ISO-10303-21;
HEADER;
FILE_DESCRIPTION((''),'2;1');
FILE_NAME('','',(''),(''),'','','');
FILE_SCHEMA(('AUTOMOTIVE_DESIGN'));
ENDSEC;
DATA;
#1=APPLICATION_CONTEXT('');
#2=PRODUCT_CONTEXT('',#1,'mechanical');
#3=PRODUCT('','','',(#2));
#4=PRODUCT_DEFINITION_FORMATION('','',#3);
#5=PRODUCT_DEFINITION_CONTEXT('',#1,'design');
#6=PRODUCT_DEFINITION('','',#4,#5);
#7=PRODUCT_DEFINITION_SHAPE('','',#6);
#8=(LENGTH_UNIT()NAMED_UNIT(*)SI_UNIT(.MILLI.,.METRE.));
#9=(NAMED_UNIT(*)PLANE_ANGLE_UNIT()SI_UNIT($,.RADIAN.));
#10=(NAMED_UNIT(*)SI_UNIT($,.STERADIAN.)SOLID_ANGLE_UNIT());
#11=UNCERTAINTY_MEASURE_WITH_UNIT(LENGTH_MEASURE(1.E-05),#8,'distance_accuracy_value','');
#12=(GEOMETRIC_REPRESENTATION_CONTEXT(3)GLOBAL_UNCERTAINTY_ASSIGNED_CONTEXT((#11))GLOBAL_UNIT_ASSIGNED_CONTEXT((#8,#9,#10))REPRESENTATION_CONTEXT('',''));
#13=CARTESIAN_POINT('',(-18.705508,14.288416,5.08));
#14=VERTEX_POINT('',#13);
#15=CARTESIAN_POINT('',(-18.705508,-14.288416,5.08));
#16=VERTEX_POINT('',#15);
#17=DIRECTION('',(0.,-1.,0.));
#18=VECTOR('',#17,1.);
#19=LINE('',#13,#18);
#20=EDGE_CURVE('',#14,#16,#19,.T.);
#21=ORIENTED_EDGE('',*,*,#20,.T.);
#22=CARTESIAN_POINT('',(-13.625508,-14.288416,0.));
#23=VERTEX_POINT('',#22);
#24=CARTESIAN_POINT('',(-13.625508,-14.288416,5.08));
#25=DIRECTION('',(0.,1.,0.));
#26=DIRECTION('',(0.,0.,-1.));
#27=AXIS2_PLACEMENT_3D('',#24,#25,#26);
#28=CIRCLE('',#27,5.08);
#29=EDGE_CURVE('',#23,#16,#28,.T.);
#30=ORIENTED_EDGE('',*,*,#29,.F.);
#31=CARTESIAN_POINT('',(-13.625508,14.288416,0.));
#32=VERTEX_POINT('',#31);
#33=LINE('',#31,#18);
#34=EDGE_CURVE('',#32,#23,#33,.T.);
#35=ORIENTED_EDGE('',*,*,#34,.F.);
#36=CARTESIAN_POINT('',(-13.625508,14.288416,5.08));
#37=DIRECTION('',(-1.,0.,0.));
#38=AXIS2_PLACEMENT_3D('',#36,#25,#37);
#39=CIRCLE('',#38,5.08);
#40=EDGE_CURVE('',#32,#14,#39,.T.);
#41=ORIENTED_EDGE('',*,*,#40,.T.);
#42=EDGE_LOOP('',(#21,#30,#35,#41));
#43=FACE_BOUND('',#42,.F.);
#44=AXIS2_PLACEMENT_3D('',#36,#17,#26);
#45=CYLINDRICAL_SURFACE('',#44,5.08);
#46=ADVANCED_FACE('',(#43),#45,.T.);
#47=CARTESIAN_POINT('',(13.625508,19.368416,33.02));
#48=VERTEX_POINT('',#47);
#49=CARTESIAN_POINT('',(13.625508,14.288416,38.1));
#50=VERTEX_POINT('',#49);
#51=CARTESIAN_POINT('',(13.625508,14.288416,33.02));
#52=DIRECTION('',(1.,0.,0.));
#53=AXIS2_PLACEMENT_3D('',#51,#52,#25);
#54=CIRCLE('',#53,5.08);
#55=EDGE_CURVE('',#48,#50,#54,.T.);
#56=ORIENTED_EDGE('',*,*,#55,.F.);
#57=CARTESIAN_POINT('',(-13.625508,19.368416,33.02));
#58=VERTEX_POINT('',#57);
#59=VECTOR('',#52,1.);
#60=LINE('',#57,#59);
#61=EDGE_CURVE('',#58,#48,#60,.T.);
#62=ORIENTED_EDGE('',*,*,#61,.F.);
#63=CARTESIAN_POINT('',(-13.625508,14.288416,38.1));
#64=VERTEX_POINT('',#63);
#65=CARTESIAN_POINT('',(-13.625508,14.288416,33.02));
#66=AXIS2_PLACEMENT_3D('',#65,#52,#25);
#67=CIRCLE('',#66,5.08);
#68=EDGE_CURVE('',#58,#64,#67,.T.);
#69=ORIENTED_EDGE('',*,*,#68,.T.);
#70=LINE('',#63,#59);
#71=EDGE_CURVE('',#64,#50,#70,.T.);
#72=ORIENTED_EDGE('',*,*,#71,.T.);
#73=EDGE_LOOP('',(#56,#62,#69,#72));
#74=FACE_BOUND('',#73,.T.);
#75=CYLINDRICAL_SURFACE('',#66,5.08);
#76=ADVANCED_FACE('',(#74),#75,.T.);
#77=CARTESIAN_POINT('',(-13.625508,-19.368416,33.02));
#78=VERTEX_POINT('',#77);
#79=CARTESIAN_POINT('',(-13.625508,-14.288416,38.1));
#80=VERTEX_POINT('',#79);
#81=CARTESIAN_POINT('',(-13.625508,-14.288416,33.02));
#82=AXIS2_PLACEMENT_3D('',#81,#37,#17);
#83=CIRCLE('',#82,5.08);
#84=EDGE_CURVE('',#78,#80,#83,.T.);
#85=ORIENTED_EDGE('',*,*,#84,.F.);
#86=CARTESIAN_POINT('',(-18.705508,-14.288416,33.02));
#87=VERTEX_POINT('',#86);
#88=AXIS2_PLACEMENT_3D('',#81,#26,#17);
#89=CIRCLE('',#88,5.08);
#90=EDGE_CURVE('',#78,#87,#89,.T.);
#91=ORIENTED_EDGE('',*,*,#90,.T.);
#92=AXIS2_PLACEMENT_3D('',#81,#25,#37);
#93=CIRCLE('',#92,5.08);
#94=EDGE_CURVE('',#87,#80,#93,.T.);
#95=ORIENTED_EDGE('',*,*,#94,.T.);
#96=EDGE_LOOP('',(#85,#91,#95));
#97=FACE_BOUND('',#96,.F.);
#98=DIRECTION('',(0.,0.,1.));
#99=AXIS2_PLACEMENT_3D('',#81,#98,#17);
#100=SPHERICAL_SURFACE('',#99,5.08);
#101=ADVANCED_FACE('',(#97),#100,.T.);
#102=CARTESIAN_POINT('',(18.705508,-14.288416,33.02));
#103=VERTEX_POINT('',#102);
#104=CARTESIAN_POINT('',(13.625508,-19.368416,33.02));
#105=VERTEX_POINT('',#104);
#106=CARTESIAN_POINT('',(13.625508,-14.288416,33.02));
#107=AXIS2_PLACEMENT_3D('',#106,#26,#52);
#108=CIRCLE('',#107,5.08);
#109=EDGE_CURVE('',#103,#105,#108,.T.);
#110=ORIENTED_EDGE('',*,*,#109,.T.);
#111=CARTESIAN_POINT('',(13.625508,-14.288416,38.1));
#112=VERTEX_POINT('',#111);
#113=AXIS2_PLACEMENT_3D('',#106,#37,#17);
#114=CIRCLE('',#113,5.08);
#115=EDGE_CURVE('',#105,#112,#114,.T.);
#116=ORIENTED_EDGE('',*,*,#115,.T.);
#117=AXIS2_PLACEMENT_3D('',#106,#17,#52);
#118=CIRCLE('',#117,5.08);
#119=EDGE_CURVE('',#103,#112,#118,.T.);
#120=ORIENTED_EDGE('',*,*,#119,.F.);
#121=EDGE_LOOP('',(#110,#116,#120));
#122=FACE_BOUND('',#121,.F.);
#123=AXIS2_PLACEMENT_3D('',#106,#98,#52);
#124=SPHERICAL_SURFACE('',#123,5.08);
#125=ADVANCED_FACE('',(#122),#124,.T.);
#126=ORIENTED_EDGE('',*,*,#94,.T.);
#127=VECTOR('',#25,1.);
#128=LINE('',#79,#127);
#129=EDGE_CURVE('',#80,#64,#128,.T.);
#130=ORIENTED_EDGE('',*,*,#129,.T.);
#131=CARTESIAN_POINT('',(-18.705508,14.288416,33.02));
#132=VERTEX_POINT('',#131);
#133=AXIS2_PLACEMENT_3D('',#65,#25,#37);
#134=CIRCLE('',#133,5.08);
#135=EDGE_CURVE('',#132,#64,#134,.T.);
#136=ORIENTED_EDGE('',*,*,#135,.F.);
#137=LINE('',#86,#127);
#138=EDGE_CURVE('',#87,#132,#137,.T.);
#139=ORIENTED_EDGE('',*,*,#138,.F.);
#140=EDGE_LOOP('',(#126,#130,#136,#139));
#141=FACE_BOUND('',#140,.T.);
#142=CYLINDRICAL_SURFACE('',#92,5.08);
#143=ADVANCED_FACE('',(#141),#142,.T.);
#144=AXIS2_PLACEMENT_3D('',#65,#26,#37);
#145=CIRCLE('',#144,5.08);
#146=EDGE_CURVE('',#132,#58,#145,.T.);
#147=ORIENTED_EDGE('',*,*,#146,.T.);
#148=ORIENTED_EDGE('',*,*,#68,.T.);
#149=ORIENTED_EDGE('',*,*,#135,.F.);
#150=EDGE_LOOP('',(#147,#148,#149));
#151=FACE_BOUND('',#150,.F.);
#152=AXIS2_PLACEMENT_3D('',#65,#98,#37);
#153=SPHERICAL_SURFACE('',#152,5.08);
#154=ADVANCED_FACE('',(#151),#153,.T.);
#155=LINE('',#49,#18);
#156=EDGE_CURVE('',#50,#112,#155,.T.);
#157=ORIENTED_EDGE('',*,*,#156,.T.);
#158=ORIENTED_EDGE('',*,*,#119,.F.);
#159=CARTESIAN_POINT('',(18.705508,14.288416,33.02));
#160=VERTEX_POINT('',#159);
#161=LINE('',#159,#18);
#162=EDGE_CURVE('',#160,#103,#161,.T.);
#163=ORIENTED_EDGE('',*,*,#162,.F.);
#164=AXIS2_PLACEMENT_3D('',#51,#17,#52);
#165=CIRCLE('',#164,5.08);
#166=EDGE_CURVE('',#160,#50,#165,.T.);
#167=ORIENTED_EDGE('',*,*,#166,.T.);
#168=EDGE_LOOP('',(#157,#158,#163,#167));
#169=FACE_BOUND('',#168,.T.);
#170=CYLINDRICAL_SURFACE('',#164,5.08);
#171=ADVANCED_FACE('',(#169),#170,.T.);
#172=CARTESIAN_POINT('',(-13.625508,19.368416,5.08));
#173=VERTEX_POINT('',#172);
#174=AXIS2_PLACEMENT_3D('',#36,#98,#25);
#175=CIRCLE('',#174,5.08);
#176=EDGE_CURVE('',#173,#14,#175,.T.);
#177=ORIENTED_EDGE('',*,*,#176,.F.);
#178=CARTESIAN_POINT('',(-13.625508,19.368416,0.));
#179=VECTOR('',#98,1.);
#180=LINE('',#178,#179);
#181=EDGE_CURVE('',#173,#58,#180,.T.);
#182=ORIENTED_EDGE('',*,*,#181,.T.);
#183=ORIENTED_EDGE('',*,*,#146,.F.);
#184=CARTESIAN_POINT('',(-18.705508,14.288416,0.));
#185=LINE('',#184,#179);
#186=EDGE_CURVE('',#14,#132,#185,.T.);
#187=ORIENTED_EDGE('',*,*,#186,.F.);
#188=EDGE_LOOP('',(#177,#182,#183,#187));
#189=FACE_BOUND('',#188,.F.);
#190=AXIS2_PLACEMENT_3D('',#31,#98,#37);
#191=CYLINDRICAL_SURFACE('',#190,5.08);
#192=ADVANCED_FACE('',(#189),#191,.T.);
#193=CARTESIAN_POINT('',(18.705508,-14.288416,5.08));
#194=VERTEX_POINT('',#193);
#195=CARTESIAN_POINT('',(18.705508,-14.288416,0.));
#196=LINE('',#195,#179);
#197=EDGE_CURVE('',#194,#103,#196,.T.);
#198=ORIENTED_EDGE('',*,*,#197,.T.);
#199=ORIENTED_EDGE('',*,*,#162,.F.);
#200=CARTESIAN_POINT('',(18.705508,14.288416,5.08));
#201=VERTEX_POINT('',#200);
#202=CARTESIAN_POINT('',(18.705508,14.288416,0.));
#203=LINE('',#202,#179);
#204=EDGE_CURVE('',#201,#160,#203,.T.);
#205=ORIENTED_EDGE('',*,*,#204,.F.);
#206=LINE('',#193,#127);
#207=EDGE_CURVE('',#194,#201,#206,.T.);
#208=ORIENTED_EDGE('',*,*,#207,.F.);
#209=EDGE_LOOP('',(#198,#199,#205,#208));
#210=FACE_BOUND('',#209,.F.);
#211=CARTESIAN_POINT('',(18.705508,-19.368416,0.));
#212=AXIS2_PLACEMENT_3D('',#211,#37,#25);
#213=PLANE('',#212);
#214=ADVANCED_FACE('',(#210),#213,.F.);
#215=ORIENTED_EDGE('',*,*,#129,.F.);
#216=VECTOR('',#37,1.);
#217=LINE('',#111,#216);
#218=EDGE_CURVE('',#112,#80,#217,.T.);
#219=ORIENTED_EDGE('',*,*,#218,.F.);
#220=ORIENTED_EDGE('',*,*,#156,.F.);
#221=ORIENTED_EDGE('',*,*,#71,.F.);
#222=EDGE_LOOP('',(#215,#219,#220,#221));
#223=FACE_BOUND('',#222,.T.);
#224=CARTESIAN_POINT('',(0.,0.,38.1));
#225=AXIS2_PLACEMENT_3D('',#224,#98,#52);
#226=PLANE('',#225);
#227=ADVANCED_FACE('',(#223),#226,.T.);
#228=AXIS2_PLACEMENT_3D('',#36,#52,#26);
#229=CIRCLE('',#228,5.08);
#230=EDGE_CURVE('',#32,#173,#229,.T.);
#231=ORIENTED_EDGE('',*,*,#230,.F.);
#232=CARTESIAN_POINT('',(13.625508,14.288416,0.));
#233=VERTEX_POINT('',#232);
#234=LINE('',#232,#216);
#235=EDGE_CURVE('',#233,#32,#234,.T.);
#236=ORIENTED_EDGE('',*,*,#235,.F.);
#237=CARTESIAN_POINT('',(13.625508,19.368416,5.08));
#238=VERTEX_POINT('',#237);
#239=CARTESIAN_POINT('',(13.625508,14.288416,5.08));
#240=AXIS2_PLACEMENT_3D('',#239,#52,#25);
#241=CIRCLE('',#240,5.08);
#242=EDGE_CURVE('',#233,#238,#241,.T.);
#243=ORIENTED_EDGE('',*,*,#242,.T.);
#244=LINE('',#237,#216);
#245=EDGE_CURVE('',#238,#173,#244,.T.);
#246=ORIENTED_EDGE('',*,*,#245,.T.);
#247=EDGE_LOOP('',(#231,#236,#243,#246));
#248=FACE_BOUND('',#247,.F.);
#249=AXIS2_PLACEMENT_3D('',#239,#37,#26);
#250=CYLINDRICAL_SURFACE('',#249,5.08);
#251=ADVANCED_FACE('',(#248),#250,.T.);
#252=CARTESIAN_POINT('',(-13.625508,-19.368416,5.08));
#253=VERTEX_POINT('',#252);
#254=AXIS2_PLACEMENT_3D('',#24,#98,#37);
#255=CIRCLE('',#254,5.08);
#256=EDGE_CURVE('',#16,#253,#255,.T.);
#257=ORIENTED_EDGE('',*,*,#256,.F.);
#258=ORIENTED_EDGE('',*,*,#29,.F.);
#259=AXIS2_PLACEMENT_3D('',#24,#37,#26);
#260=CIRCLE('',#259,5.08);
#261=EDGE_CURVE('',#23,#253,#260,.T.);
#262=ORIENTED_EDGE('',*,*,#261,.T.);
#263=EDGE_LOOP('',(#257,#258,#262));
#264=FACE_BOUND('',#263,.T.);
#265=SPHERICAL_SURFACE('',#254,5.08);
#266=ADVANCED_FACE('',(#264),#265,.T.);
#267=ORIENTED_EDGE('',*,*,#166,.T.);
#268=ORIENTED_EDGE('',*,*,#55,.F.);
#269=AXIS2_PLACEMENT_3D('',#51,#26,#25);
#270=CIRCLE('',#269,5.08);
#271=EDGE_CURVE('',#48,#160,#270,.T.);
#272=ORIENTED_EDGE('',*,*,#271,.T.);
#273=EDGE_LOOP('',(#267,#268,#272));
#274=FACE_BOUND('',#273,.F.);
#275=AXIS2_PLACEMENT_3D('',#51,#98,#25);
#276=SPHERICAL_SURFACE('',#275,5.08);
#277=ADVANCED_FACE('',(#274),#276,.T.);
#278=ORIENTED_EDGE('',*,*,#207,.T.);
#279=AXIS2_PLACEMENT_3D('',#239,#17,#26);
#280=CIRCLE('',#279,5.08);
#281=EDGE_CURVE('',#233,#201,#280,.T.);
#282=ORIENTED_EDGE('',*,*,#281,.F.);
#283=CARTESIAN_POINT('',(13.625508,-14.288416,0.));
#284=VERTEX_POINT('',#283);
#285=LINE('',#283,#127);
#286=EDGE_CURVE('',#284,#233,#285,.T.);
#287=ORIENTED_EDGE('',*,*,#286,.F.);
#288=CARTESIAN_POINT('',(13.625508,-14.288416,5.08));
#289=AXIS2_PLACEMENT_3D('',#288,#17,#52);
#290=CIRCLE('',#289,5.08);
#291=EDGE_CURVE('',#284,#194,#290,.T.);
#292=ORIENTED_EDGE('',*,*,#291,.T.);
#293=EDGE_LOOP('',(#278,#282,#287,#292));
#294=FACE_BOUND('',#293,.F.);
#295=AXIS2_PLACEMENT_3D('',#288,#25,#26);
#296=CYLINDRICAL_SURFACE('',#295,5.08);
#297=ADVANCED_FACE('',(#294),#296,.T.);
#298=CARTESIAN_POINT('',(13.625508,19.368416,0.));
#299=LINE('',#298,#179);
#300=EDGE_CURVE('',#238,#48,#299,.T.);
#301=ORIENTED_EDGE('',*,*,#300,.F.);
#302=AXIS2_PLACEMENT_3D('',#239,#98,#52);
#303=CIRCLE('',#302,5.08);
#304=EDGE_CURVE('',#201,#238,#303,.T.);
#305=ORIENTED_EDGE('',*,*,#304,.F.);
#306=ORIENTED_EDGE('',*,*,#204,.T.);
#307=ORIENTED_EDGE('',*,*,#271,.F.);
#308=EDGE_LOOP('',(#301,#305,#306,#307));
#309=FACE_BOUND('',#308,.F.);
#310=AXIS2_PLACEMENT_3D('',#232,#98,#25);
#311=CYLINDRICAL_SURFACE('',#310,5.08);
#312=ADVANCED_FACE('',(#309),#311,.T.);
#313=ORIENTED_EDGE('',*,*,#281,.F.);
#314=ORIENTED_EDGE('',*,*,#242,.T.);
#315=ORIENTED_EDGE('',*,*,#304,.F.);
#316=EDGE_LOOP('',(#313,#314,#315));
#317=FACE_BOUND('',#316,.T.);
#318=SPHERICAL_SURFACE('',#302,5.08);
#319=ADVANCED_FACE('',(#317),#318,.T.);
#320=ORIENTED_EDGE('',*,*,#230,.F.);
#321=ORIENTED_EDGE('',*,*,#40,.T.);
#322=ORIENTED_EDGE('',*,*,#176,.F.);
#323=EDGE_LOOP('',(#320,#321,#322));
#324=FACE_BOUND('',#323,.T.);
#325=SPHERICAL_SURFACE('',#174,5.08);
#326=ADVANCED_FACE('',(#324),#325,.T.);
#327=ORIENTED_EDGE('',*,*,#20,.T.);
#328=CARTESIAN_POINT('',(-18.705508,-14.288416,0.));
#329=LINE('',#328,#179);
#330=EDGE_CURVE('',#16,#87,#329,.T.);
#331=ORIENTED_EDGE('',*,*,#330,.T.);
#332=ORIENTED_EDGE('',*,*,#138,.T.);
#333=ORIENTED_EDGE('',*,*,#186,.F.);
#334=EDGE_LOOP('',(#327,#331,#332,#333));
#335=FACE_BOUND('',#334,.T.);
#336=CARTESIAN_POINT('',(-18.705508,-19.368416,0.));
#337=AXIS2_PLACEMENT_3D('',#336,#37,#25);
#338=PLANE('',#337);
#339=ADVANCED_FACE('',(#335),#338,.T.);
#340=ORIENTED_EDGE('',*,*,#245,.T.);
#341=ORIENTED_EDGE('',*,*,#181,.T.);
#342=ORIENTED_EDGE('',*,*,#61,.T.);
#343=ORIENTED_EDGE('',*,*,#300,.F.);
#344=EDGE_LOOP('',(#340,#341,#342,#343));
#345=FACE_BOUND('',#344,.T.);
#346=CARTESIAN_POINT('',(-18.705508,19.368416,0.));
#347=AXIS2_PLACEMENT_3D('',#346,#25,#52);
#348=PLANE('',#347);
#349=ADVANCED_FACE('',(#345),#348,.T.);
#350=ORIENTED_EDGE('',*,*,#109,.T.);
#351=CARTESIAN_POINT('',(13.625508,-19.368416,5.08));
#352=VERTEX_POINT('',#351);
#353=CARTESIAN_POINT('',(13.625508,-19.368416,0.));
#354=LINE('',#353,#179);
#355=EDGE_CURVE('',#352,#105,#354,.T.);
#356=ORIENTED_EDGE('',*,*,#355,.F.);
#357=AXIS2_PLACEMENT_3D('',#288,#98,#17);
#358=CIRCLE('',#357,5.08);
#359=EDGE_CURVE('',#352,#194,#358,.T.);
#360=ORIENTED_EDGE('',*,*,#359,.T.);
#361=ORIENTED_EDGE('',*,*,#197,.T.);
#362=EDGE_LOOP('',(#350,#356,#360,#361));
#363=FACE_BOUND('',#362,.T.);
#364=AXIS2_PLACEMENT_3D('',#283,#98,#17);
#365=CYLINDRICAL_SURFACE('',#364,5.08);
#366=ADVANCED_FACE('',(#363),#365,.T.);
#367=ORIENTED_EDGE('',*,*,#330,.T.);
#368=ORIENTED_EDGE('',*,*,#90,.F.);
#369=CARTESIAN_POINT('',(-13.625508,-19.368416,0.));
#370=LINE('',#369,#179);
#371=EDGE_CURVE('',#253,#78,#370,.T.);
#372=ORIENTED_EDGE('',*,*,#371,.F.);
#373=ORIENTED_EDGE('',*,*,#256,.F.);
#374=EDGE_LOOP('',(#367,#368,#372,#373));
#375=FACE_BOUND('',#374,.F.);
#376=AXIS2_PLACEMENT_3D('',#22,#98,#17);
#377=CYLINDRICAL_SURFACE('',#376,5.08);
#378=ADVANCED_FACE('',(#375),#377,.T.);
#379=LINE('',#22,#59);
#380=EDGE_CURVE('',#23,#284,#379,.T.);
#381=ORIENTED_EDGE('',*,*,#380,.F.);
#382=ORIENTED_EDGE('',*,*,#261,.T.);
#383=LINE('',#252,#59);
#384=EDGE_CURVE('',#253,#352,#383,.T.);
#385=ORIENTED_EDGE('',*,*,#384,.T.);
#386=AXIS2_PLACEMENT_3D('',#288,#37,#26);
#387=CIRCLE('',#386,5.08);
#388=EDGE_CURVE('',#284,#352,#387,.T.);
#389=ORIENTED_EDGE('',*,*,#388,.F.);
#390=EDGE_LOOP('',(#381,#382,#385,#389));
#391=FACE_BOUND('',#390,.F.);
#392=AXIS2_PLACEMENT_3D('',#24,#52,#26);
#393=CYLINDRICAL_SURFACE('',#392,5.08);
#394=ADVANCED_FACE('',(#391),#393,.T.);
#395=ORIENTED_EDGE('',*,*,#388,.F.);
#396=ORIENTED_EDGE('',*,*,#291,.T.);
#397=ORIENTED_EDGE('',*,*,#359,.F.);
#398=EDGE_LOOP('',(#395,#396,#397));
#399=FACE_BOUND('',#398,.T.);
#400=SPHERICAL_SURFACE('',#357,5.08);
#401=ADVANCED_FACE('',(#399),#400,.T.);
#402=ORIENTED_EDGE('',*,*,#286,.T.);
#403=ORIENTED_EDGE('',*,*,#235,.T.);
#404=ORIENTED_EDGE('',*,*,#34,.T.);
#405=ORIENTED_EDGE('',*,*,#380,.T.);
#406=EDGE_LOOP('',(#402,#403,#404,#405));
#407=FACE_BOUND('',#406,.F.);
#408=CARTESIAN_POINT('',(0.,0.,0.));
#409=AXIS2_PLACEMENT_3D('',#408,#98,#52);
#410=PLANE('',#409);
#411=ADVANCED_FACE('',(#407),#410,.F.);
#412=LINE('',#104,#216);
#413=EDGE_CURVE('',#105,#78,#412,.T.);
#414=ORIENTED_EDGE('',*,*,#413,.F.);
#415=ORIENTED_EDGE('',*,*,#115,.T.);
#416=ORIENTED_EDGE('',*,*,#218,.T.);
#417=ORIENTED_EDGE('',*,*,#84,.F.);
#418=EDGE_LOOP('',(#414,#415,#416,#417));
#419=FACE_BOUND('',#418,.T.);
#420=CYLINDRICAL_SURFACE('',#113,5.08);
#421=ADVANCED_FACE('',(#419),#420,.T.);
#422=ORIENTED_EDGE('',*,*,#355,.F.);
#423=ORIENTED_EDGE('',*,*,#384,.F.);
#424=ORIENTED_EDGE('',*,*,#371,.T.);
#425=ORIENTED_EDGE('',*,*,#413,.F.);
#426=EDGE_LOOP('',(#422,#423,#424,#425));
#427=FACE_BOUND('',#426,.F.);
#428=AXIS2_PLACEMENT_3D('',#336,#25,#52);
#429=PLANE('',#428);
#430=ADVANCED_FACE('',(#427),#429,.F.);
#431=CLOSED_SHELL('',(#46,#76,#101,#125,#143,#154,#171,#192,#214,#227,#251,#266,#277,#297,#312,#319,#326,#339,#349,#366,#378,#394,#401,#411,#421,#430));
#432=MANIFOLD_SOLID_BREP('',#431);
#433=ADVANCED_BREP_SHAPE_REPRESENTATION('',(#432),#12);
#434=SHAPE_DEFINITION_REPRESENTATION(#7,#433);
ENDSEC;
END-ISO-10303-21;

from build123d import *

# Parameters (mm, degrees)
F0_W     = 37.4110154808
F0_H     = 38.7368313968
F1_DEPTH = 38.1
F2_R     = 5.08
F3_R     = 5.08
F4_R     = 5.08
F5_R     = 5.08
F6_R     = 5.08
F7_R     = 5.08


# Not quite as in the source:
# - the program builds the solid bodies; features that only make, move or delete a surface that nothing else refers to are left out


with BuildPart() as f1:
    # F0 (on Top) → F1 (new body)
    with BuildSketch(Plane.XY):
        Rectangle(F0_W, F0_H)
    extrude(amount=F1_DEPTH)

    # F2
    f2_edges = [f1.edges().sort_by_distance(p)[0] for p in [
        (18.705508, -19.368416, 19.05),
    ]]
    fillet(f2_edges, radius=F2_R)

    # F3
    f3_edges = [f1.edges().sort_by_distance(p)[0] for p in [
        (-18.705508, -19.368416, 19.05),
    ]]
    fillet(f3_edges, radius=F3_R)

    # F4
    f4_edges = [f1.edges().sort_by_distance(p)[0] for p in [
        (-18.705508, 19.368416, 19.05),
    ]]
    fillet(f4_edges, radius=F4_R)

    # F5
    f5_edges = [f1.edges().sort_by_distance(p)[0] for p in [
        (18.705508, 19.368416, 19.05),
    ]]
    fillet(f5_edges, radius=F5_R)

    # F6
    f6_edges = [f1.edges().sort_by_distance(p)[0] for p in [
        (0, 19.368416, 38.1),
    ]]
    fillet(f6_edges, radius=F6_R)

    # F7
    f7_edges = [f1.edges().sort_by_distance(p)[0] for p in [
        (0, -19.368416, 0),
    ]]
    fillet(f7_edges, radius=F7_R)


solid = f1.part
